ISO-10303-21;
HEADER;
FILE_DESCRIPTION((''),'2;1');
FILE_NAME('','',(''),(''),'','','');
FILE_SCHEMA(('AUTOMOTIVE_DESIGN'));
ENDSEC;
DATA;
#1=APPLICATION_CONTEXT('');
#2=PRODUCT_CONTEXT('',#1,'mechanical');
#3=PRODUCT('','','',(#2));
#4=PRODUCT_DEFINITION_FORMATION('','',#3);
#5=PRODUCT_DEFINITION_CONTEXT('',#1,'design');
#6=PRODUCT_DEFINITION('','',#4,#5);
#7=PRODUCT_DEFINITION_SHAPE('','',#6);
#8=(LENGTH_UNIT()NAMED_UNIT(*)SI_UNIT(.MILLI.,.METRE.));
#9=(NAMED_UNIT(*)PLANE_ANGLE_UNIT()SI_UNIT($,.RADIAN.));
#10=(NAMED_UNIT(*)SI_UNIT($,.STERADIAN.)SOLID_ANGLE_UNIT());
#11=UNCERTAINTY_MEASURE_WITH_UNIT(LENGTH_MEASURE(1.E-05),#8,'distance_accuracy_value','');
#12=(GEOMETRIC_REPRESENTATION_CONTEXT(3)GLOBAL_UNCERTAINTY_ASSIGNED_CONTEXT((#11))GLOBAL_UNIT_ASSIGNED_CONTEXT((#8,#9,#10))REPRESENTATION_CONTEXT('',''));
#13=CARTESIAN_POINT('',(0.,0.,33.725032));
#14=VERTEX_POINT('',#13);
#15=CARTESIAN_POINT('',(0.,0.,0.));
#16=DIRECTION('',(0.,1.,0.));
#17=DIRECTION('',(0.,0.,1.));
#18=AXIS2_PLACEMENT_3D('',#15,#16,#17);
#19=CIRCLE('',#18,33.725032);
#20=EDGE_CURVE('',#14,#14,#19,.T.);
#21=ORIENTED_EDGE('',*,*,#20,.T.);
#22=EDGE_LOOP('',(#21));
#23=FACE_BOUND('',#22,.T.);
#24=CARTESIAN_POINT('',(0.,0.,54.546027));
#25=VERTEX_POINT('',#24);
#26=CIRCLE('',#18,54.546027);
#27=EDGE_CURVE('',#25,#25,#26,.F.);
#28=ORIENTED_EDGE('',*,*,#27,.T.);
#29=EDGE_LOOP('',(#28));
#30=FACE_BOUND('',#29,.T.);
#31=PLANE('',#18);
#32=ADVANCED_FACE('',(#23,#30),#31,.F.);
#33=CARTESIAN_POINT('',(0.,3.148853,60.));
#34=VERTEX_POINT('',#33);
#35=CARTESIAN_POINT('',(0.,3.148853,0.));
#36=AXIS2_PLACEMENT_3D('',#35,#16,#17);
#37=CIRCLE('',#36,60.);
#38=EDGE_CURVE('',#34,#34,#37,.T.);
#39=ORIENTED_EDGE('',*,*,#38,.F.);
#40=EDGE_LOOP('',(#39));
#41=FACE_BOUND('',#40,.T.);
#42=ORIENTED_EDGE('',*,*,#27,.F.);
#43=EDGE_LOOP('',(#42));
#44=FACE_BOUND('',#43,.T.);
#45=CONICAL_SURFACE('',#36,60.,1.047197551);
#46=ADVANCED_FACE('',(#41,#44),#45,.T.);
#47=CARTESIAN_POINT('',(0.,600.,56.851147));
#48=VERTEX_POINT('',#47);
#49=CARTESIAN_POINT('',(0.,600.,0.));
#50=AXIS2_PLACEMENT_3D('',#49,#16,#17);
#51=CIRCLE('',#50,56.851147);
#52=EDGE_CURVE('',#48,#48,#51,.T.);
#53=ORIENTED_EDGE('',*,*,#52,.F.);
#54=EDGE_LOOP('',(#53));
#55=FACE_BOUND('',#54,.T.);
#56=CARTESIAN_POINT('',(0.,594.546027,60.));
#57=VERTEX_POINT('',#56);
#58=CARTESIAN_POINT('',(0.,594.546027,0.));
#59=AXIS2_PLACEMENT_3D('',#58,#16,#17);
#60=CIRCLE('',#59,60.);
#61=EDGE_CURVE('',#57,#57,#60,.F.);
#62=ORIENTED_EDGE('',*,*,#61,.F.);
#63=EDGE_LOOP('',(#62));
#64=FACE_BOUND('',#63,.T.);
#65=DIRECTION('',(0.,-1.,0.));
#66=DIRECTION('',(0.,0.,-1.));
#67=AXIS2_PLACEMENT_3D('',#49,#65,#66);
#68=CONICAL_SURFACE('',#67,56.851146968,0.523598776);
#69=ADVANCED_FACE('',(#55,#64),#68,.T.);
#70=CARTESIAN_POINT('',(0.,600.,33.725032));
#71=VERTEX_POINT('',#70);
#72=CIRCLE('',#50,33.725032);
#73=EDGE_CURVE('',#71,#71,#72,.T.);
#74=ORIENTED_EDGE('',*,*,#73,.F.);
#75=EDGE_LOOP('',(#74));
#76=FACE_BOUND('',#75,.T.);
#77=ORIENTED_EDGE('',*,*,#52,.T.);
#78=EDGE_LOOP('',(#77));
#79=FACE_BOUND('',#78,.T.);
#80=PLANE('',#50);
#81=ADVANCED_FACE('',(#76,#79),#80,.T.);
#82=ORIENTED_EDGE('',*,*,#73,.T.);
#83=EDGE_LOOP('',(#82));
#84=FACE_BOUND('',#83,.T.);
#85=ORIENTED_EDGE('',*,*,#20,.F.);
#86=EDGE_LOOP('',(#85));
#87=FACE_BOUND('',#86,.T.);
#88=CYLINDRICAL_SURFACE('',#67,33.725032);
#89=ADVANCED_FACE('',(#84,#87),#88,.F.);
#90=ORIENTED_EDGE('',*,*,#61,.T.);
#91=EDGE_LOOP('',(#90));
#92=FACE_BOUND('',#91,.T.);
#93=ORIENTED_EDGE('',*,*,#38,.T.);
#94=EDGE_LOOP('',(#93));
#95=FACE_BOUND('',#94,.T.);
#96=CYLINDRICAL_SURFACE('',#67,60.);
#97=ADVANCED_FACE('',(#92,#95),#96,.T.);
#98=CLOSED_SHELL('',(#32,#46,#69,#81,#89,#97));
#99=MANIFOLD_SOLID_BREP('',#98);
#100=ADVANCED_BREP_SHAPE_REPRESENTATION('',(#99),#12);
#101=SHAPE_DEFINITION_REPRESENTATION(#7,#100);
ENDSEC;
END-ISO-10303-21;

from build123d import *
from OCP.BRepFilletAPI import BRepFilletAPI_MakeChamfer

# Parameters (mm, degrees)
SKETCH1_R           = 60
BOSS_EXTRUDE1_DEPTH = 600
SKETCH2_R           = 33.725032425
CUT_EXTRUDE1_DEPTH  = 606.970296302
CHAMFER1_SIZE       = 5.453973437
CHAMFER1_SIZE2      = 3.148853032


with BuildPart() as part:
    # Sketch1 → Boss-Extrude1 (new body)
    with BuildSketch(Plane(origin=(0, 0, 0), x_dir=(1, 0, 0), z_dir=(0, 1, 0))):
        Circle(SKETCH1_R)
    extrude(amount=BOSS_EXTRUDE1_DEPTH)

    # Sketch2 → Cut-Extrude1 (cut, through all)
    with BuildSketch(Plane(origin=(0, 0, 0), x_dir=(1, 0, 0), z_dir=(0, 1, 0))):
        Circle(SKETCH2_R)
    extrude(amount=CUT_EXTRUDE1_DEPTH, mode=Mode.SUBTRACT)

    # Chamfer1: one chamfer whose edges measure the first distance from different faces: ONE call of the kernel's chamfer builder (chamfer() names one face for all edges)
    chamfer1_edges_1 = [part.edges().sort_by_distance(p)[0] for p in [
        (-60, 600, 0),
    ]]
    chamfer1_side_1 = [part.faces().sort_by_distance(p)[0] for p in [
        (-60, 300, 0),
    ]]
    chamfer1_edges_2 = [part.edges().sort_by_distance(p)[0] for p in [
        (-60, 0, 0),
    ]]
    chamfer1_side_2 = [part.faces().sort_by_distance(p)[0] for p in [
        (-58.302943725, 0, 0),
    ]]
    chamfer1 = BRepFilletAPI_MakeChamfer(part.part.solid().wrapped)
    for e in chamfer1_edges_1:
        chamfer1.Add(CHAMFER1_SIZE, CHAMFER1_SIZE2, e.wrapped, chamfer1_side_1[0].wrapped)  # the first distance lies on this face
    for e in chamfer1_edges_2:
        chamfer1.Add(CHAMFER1_SIZE, CHAMFER1_SIZE2, e.wrapped, chamfer1_side_2[0].wrapped)  # the first distance lies on this face
    add(Compound.cast(chamfer1.Shape()), mode=Mode.REPLACE)


solid = part.part
